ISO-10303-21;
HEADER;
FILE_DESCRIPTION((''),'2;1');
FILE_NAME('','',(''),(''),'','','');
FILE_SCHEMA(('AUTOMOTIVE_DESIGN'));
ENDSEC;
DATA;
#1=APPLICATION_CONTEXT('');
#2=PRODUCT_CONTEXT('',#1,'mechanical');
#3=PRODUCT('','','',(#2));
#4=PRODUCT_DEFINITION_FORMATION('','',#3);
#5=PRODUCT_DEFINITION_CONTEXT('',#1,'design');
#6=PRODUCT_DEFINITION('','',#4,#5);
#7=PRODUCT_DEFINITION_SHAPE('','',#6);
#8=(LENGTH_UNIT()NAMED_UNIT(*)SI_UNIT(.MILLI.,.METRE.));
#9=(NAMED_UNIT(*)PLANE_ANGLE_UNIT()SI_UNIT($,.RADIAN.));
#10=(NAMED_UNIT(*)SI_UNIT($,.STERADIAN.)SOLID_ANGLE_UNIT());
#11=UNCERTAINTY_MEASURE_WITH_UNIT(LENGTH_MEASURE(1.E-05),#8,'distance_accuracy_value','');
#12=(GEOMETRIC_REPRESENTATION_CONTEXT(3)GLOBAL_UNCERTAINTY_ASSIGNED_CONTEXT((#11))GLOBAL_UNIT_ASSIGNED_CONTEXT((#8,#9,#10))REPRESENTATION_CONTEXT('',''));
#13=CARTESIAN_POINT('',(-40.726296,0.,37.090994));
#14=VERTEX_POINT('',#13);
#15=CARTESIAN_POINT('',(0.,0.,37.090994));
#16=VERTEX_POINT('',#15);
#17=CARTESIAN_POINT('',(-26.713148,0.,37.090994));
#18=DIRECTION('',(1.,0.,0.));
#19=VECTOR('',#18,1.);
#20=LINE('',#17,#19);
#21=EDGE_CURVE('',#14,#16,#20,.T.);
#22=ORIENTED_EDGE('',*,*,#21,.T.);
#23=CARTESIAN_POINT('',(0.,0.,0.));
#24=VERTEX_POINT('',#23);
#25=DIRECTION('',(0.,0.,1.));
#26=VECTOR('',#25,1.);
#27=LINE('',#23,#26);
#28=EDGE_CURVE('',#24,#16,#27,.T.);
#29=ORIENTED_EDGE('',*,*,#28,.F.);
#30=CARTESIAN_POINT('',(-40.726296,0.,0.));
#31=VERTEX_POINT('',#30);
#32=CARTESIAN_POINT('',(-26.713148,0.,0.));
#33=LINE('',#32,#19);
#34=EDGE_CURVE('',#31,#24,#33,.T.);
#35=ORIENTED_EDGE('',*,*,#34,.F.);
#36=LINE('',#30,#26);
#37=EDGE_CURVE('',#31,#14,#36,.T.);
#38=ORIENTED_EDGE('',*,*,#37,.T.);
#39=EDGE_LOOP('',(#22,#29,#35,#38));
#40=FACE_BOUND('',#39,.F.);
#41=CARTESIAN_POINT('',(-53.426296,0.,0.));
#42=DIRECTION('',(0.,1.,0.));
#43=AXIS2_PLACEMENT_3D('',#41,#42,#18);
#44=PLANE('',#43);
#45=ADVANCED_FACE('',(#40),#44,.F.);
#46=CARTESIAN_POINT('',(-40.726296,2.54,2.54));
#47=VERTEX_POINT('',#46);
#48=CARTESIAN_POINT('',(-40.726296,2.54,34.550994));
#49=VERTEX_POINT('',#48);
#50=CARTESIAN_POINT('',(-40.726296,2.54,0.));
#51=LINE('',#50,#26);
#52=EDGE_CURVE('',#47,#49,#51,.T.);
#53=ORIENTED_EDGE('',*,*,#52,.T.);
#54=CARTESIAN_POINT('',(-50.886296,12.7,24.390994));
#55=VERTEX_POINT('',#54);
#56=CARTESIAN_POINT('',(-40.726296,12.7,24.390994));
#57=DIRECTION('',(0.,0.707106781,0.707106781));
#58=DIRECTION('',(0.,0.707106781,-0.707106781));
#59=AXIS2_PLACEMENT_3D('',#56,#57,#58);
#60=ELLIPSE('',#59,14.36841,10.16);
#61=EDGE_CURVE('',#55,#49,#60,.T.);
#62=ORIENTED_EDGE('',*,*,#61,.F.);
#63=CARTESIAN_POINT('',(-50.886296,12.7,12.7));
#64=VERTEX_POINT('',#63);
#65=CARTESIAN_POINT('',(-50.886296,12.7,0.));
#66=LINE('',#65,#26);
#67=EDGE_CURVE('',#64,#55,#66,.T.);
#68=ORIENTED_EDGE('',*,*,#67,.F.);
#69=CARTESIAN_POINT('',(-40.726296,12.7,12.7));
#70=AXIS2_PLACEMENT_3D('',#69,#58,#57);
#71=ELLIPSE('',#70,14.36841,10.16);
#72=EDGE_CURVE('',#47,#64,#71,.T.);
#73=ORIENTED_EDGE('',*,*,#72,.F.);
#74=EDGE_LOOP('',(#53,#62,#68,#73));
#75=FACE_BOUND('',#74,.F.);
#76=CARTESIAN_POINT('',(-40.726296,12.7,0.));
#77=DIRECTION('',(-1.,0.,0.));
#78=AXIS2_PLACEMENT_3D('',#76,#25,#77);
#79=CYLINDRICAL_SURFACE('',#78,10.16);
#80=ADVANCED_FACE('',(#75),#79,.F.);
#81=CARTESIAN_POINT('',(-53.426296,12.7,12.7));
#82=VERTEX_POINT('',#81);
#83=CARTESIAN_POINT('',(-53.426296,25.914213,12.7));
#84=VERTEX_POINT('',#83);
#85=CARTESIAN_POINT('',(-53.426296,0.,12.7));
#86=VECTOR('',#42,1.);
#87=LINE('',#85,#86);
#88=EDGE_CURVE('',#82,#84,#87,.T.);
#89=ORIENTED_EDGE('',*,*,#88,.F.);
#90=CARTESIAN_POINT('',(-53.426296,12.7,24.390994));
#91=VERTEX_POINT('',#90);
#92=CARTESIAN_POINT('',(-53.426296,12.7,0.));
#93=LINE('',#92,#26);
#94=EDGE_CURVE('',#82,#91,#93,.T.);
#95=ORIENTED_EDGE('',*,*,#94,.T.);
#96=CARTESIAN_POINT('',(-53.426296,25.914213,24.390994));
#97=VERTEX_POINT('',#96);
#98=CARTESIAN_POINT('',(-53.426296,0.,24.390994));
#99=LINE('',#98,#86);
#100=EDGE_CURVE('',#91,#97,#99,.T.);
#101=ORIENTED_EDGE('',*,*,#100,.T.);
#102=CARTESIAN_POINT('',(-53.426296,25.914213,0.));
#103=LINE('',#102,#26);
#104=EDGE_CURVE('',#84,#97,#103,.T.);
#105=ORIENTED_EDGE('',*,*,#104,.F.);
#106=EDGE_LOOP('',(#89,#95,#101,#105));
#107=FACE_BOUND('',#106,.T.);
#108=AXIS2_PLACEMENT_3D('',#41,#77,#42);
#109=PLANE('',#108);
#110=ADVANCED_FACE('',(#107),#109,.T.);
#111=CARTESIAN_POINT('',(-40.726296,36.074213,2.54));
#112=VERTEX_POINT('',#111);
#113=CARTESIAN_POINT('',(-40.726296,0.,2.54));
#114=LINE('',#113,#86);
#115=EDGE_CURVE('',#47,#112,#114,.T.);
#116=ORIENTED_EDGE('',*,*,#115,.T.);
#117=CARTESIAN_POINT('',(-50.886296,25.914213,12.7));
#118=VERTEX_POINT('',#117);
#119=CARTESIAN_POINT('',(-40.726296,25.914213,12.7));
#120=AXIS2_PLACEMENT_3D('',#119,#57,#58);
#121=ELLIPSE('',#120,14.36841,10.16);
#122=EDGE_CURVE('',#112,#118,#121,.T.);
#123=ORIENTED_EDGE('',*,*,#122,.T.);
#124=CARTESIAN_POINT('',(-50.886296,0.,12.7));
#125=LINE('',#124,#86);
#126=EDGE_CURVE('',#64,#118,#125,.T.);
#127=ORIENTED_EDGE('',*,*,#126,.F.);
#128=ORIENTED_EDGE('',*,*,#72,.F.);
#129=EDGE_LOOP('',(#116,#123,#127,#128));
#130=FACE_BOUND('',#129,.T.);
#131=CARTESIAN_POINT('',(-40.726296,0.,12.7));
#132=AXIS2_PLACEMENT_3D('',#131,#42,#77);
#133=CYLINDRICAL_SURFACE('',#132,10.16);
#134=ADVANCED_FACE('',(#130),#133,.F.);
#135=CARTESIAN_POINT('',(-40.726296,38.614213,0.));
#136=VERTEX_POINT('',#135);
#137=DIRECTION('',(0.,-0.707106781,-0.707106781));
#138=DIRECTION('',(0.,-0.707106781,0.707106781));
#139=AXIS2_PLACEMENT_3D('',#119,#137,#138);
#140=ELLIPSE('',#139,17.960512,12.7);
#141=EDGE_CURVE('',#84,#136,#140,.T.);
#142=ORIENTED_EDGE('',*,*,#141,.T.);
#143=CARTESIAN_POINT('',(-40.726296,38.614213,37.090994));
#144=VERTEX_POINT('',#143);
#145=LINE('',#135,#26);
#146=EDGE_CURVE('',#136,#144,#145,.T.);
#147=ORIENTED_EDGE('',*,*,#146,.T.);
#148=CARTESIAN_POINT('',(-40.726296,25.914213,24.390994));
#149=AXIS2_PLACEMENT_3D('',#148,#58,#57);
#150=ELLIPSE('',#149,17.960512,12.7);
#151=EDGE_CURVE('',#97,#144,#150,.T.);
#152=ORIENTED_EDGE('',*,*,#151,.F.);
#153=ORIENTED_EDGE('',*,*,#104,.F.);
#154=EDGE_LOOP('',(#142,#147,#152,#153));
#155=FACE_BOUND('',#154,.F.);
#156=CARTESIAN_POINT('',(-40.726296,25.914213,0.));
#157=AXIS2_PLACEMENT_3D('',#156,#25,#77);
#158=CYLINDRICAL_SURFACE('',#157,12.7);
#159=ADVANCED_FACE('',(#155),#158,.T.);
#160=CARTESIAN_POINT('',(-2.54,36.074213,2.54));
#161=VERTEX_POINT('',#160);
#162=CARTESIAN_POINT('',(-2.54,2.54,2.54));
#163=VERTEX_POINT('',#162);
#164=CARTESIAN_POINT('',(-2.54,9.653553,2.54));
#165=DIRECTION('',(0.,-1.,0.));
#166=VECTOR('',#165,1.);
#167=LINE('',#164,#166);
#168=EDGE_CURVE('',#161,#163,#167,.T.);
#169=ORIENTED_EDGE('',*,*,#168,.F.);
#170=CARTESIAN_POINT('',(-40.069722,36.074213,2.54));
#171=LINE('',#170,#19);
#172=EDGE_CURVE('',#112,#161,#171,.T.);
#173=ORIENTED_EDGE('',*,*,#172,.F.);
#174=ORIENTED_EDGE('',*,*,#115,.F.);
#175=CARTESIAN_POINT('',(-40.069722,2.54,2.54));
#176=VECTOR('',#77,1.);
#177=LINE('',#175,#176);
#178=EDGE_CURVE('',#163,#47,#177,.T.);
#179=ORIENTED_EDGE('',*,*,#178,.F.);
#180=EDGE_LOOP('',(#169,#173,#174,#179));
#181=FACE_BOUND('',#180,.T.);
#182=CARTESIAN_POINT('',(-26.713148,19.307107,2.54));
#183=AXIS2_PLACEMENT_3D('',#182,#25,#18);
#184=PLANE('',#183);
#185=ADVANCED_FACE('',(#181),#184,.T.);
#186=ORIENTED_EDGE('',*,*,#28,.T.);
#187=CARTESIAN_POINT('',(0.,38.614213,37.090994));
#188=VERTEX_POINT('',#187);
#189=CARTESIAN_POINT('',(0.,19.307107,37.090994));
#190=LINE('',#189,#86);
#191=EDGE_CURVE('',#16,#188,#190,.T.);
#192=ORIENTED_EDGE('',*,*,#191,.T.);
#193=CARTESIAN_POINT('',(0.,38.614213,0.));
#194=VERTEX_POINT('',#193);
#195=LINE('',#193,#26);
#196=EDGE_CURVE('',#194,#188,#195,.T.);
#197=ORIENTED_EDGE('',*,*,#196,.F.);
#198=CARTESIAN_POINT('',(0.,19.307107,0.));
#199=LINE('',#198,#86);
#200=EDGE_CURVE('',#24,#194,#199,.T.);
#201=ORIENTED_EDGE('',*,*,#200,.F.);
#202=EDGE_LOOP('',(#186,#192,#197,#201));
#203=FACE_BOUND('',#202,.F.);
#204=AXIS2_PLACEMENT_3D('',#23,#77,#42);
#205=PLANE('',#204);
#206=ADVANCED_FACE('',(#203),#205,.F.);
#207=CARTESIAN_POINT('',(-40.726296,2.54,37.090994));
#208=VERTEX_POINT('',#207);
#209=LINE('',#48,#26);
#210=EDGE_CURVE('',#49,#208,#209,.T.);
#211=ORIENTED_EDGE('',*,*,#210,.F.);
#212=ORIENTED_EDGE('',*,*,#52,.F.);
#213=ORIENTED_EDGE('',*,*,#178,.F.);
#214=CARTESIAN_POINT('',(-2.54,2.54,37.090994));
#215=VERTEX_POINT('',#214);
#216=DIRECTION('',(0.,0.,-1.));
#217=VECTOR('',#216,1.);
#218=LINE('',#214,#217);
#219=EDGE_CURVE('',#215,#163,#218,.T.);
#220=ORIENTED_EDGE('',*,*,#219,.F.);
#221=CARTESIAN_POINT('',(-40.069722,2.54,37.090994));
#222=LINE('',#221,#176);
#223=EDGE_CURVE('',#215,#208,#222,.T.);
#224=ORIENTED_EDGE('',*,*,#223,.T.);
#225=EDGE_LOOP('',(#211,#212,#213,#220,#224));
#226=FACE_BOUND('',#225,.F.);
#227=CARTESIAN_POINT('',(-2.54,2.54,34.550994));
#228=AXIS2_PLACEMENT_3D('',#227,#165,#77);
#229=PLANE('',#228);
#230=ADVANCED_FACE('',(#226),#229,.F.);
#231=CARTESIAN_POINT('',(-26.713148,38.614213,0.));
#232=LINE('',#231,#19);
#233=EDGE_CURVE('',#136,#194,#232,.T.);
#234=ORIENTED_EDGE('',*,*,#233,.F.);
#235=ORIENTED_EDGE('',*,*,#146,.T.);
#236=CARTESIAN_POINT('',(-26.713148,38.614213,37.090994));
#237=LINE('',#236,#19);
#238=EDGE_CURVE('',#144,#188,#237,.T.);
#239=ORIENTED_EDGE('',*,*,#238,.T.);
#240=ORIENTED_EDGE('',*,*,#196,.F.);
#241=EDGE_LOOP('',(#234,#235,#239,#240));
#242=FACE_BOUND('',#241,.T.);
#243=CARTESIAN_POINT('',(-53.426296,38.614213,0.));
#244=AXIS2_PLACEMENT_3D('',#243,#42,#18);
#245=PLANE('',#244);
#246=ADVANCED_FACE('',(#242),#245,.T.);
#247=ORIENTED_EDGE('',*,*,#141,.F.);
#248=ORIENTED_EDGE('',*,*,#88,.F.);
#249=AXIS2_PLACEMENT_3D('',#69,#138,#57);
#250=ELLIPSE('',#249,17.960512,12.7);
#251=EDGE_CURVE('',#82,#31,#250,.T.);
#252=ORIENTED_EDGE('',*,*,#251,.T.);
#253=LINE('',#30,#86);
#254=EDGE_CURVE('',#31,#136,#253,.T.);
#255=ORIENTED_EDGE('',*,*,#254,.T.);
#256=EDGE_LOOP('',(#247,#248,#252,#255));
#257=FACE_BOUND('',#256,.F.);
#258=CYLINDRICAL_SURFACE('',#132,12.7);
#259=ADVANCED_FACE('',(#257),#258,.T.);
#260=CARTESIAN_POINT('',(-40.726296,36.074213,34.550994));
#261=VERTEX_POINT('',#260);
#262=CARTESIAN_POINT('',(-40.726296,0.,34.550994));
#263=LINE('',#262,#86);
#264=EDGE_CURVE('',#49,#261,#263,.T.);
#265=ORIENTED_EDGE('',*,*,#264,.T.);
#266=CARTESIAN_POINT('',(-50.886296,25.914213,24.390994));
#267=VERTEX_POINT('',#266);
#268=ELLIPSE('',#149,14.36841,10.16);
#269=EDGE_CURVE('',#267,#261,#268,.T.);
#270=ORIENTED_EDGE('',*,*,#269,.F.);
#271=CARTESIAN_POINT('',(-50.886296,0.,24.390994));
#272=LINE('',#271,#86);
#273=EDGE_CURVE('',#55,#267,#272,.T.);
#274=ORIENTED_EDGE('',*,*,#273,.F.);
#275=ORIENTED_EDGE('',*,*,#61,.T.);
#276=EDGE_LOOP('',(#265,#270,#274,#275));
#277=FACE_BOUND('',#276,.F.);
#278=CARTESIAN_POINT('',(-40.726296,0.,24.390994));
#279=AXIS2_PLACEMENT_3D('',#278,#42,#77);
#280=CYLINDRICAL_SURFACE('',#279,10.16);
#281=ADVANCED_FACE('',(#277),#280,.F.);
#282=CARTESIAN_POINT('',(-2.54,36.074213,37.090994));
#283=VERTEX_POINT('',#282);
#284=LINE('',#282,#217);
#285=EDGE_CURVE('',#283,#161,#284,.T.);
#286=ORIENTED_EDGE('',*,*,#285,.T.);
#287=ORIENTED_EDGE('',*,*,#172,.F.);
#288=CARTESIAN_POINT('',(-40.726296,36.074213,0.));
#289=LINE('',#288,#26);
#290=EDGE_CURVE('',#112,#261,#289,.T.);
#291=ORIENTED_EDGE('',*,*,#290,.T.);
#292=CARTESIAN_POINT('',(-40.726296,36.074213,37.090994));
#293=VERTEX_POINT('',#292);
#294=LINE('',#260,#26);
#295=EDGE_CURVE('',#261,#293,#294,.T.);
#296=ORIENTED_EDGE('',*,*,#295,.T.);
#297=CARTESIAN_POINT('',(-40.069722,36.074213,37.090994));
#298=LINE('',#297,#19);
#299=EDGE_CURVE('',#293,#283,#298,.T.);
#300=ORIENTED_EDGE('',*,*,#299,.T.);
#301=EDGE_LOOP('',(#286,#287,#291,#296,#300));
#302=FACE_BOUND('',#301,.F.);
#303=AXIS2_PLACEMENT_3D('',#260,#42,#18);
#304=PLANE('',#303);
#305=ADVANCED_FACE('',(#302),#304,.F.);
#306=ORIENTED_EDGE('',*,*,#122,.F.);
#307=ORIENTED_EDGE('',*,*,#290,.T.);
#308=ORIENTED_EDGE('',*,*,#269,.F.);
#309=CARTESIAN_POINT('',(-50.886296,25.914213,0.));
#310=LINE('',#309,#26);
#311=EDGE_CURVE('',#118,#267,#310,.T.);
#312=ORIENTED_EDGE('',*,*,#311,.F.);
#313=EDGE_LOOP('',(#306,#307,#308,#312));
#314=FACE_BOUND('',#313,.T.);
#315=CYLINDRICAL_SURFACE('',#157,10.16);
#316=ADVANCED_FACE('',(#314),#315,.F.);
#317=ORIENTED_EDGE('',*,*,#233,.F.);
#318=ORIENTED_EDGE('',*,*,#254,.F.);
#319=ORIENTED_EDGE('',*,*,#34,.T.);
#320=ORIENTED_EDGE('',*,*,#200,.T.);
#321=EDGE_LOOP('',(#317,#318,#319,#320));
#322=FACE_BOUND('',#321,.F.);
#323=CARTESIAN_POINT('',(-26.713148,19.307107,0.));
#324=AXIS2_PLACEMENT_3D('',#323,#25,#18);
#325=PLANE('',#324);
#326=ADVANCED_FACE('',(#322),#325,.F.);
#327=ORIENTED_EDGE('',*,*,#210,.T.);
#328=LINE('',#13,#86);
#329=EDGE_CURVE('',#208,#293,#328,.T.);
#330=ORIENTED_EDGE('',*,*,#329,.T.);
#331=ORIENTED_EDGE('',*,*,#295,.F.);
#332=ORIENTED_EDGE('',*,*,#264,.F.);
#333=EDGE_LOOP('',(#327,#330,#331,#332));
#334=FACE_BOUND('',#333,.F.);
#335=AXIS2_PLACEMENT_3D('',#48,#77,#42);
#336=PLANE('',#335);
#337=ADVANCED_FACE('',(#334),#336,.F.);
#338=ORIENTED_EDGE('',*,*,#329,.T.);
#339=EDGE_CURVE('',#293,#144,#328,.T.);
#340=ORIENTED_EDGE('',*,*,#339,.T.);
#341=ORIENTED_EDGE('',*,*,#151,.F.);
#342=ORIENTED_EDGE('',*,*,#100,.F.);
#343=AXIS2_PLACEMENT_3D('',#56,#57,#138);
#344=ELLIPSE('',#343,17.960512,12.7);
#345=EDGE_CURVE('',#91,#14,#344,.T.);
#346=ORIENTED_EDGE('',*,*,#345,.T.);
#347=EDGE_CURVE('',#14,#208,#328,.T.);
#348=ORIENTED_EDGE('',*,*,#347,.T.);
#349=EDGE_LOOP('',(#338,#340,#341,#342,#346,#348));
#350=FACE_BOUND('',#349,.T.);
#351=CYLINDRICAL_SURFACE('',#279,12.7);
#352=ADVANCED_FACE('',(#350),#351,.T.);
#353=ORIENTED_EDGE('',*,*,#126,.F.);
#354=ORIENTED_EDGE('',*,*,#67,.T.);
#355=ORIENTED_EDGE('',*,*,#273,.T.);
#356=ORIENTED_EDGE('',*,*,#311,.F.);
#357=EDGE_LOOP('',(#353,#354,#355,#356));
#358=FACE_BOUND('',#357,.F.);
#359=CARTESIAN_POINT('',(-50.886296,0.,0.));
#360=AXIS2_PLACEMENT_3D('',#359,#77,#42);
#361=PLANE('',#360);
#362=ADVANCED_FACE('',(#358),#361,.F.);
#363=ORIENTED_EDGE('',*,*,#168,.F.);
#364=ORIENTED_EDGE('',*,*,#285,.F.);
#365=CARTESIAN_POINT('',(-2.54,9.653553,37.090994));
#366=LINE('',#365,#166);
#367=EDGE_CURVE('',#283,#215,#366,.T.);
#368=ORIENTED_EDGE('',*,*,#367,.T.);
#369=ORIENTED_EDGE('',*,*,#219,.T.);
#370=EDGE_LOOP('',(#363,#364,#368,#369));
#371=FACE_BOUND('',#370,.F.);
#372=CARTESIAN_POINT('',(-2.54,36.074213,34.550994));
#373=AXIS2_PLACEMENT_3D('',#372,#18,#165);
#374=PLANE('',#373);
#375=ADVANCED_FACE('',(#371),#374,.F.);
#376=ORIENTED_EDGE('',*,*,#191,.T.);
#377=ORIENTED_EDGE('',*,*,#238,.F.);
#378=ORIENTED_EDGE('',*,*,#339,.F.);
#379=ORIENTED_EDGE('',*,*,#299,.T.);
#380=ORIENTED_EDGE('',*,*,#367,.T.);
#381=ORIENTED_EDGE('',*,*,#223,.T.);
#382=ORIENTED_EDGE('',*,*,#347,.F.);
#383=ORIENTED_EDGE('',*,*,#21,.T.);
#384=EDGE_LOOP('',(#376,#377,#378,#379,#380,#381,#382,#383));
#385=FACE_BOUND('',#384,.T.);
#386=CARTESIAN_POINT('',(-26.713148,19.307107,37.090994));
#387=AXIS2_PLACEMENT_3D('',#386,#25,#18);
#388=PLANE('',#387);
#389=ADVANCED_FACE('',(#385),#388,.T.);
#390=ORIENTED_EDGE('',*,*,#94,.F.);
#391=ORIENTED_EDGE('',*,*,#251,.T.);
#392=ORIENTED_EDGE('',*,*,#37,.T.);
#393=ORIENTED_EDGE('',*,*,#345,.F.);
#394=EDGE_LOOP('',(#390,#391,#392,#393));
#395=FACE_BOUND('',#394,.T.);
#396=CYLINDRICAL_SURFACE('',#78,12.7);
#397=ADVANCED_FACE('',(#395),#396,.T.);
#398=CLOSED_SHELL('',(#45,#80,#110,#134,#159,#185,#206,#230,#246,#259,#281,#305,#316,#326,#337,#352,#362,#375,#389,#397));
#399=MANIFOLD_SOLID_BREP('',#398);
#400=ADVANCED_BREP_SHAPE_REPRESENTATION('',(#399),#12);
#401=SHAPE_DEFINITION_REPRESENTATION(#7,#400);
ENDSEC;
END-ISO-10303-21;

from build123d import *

# Parameters (mm, degrees)
F0_W     = 53.4262955189
F0_H     = 38.6142134666
F1_DEPTH = 37.0909944177
F2_R     = 12.7
F3_T     = -2.54


# Not quite as in the source:
# - a shell that OpenCascade refuses in one call is made with other operations: the cavity is built on its own and cut out


with BuildPart() as f1:
    # F0 (on Top) → F1 (new body)
    with BuildSketch(Plane.XY):
        with Locations((-26.7131477594, 19.3071067333)):
            Rectangle(F0_W, F0_H)
    extrude(amount=F1_DEPTH)

    # F2
    f2_edges = [f1.edges().sort_by_distance(p)[0] for p in [
        (-53.426296, 38.614213, 18.545497),
        (-53.426296, 0, 18.545497),
        (-53.426296, 19.307107, 0),
        (-53.426296, 19.307107, 37.090994),
    ]]
    fillet(f2_edges, radius=F2_R)

    # F3: a shell. OpenCascade refuses it in one call, so the cavity is built on its own and cut out:
    # the body offset inwards by the wall thickness, plus a prism from it out through each open face.
    f3_core = offset(f1.part, amount=F3_T, mode=Mode.PRIVATE)
    f3_exits = [f3_core.faces().sort_by_distance(p)[0] for p in [
        (-21.633148, 19.307107, 34.550994),
    ]]
    add(f3_core, mode=Mode.SUBTRACT)
    extrude(f3_exits, amount=-F3_T, mode=Mode.SUBTRACT)


solid = f1.part
